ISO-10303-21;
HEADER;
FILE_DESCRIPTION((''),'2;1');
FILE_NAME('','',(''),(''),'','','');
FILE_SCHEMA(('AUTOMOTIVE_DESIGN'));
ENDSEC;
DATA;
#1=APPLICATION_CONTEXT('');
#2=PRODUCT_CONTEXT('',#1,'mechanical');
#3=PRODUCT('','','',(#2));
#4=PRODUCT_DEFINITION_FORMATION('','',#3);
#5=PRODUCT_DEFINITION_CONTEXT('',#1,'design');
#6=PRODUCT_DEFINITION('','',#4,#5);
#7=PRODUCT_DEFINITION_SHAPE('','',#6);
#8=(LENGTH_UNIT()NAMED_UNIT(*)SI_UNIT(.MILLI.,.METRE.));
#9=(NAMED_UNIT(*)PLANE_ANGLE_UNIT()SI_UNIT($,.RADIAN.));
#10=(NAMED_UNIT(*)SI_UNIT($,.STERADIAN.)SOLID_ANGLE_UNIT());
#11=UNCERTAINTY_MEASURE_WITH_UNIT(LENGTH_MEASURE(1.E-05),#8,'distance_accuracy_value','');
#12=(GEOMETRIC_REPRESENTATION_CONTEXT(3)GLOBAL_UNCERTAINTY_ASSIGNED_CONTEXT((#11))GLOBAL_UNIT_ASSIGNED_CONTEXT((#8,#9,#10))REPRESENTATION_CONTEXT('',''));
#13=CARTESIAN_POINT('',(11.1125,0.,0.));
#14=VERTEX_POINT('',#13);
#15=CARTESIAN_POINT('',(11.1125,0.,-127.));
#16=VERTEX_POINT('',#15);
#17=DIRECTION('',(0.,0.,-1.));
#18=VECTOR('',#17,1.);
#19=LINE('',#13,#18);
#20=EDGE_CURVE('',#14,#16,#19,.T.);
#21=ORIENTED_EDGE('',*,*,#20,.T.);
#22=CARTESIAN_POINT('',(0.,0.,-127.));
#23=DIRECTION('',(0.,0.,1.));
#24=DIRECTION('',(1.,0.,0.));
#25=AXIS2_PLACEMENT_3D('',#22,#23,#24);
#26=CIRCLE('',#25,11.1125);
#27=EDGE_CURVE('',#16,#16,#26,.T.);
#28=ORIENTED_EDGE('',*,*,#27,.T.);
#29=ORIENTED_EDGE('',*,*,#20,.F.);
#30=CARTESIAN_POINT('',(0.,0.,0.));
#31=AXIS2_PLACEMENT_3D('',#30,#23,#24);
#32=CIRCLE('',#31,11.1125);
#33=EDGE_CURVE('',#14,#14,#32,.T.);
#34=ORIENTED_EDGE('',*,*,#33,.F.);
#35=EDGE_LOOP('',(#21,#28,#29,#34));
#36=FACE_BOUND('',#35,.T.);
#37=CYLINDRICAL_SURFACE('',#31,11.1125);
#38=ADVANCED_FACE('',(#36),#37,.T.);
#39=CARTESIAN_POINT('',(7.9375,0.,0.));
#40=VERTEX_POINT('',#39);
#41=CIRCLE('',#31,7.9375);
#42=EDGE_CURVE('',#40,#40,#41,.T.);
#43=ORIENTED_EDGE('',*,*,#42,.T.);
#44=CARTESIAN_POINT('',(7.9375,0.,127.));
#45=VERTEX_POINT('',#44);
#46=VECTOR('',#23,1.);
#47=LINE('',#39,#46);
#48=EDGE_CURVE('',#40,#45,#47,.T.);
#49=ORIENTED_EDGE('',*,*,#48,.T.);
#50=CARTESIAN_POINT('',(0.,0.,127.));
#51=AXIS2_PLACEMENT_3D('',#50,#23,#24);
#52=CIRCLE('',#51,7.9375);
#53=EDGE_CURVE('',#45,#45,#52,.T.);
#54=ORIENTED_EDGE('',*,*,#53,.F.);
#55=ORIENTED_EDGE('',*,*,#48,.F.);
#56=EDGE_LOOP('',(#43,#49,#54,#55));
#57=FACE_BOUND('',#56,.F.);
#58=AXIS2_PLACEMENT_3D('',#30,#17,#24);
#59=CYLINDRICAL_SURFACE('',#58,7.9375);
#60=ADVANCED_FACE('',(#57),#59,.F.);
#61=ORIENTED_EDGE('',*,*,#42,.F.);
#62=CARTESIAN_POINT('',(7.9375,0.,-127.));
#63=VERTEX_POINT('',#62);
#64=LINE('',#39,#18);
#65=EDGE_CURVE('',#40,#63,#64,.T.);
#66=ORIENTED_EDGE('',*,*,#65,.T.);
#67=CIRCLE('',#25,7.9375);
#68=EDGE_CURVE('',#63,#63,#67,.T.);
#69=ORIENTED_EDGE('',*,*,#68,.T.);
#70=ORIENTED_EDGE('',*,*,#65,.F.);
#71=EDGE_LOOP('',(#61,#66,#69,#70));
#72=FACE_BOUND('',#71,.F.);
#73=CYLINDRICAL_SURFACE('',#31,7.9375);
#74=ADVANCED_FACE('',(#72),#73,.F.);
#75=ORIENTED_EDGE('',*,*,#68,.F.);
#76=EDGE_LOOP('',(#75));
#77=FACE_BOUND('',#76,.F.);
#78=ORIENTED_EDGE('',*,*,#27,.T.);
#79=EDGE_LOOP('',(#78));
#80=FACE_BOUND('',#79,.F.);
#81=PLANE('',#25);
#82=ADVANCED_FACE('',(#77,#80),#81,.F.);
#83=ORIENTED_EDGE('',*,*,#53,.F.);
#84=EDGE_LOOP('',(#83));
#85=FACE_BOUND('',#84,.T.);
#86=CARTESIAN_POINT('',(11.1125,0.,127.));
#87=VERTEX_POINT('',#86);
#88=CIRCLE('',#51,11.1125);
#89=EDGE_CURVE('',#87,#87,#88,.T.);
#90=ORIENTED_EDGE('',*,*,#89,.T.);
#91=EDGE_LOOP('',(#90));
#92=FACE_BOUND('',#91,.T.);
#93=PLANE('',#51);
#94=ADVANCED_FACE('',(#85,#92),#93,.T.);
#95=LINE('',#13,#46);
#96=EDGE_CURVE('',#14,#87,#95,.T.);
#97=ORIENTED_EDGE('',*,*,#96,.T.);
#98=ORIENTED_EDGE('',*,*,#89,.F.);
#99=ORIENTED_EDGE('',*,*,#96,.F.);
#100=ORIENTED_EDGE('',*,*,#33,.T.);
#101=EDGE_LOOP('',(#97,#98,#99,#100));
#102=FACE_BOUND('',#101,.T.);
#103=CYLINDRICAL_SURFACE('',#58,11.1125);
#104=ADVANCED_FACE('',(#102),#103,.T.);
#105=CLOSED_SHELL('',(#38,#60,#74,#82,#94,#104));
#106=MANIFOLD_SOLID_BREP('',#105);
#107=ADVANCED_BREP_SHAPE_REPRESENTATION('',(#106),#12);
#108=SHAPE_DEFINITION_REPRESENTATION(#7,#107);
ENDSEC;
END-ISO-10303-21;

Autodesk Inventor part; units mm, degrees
ref_plane "YZ Plane" through (0, 0, 0) normal (1, 0, 0) x (0, 1, 0)
ref_plane "XZ Plane" through (0, 0, 0) normal (0, 1, 0) x (-1, 0, 0)
ref_plane "XY Plane" through (0, 0, 0) normal (0, 0, 1) x (1, 0, 0)
sketch "Sketch1" plane through (0, 0, 0) normal (0, 0, 1) x (1, 0, 0)
  circle A0 centre (0, 0) radius 11.1125
  circle A1 centre (0, 0) radius 7.9375
  dimension "d0" = 22.225
  dimension "d1" = 3.175
extrude "Extrusion1" add sketch "Sketch1" along normal mid plane 254
thread "Thread1" size "7/8-9 UNC" class "2A" standard "ANSI Unified Screw Threads" length 25.4
thread "Thread2" size "7/8-9 UNC" class "2A" standard "ANSI Unified Screw Threads" length 14.4018
properties part number "AR-006" material "Aluminum 6061"
